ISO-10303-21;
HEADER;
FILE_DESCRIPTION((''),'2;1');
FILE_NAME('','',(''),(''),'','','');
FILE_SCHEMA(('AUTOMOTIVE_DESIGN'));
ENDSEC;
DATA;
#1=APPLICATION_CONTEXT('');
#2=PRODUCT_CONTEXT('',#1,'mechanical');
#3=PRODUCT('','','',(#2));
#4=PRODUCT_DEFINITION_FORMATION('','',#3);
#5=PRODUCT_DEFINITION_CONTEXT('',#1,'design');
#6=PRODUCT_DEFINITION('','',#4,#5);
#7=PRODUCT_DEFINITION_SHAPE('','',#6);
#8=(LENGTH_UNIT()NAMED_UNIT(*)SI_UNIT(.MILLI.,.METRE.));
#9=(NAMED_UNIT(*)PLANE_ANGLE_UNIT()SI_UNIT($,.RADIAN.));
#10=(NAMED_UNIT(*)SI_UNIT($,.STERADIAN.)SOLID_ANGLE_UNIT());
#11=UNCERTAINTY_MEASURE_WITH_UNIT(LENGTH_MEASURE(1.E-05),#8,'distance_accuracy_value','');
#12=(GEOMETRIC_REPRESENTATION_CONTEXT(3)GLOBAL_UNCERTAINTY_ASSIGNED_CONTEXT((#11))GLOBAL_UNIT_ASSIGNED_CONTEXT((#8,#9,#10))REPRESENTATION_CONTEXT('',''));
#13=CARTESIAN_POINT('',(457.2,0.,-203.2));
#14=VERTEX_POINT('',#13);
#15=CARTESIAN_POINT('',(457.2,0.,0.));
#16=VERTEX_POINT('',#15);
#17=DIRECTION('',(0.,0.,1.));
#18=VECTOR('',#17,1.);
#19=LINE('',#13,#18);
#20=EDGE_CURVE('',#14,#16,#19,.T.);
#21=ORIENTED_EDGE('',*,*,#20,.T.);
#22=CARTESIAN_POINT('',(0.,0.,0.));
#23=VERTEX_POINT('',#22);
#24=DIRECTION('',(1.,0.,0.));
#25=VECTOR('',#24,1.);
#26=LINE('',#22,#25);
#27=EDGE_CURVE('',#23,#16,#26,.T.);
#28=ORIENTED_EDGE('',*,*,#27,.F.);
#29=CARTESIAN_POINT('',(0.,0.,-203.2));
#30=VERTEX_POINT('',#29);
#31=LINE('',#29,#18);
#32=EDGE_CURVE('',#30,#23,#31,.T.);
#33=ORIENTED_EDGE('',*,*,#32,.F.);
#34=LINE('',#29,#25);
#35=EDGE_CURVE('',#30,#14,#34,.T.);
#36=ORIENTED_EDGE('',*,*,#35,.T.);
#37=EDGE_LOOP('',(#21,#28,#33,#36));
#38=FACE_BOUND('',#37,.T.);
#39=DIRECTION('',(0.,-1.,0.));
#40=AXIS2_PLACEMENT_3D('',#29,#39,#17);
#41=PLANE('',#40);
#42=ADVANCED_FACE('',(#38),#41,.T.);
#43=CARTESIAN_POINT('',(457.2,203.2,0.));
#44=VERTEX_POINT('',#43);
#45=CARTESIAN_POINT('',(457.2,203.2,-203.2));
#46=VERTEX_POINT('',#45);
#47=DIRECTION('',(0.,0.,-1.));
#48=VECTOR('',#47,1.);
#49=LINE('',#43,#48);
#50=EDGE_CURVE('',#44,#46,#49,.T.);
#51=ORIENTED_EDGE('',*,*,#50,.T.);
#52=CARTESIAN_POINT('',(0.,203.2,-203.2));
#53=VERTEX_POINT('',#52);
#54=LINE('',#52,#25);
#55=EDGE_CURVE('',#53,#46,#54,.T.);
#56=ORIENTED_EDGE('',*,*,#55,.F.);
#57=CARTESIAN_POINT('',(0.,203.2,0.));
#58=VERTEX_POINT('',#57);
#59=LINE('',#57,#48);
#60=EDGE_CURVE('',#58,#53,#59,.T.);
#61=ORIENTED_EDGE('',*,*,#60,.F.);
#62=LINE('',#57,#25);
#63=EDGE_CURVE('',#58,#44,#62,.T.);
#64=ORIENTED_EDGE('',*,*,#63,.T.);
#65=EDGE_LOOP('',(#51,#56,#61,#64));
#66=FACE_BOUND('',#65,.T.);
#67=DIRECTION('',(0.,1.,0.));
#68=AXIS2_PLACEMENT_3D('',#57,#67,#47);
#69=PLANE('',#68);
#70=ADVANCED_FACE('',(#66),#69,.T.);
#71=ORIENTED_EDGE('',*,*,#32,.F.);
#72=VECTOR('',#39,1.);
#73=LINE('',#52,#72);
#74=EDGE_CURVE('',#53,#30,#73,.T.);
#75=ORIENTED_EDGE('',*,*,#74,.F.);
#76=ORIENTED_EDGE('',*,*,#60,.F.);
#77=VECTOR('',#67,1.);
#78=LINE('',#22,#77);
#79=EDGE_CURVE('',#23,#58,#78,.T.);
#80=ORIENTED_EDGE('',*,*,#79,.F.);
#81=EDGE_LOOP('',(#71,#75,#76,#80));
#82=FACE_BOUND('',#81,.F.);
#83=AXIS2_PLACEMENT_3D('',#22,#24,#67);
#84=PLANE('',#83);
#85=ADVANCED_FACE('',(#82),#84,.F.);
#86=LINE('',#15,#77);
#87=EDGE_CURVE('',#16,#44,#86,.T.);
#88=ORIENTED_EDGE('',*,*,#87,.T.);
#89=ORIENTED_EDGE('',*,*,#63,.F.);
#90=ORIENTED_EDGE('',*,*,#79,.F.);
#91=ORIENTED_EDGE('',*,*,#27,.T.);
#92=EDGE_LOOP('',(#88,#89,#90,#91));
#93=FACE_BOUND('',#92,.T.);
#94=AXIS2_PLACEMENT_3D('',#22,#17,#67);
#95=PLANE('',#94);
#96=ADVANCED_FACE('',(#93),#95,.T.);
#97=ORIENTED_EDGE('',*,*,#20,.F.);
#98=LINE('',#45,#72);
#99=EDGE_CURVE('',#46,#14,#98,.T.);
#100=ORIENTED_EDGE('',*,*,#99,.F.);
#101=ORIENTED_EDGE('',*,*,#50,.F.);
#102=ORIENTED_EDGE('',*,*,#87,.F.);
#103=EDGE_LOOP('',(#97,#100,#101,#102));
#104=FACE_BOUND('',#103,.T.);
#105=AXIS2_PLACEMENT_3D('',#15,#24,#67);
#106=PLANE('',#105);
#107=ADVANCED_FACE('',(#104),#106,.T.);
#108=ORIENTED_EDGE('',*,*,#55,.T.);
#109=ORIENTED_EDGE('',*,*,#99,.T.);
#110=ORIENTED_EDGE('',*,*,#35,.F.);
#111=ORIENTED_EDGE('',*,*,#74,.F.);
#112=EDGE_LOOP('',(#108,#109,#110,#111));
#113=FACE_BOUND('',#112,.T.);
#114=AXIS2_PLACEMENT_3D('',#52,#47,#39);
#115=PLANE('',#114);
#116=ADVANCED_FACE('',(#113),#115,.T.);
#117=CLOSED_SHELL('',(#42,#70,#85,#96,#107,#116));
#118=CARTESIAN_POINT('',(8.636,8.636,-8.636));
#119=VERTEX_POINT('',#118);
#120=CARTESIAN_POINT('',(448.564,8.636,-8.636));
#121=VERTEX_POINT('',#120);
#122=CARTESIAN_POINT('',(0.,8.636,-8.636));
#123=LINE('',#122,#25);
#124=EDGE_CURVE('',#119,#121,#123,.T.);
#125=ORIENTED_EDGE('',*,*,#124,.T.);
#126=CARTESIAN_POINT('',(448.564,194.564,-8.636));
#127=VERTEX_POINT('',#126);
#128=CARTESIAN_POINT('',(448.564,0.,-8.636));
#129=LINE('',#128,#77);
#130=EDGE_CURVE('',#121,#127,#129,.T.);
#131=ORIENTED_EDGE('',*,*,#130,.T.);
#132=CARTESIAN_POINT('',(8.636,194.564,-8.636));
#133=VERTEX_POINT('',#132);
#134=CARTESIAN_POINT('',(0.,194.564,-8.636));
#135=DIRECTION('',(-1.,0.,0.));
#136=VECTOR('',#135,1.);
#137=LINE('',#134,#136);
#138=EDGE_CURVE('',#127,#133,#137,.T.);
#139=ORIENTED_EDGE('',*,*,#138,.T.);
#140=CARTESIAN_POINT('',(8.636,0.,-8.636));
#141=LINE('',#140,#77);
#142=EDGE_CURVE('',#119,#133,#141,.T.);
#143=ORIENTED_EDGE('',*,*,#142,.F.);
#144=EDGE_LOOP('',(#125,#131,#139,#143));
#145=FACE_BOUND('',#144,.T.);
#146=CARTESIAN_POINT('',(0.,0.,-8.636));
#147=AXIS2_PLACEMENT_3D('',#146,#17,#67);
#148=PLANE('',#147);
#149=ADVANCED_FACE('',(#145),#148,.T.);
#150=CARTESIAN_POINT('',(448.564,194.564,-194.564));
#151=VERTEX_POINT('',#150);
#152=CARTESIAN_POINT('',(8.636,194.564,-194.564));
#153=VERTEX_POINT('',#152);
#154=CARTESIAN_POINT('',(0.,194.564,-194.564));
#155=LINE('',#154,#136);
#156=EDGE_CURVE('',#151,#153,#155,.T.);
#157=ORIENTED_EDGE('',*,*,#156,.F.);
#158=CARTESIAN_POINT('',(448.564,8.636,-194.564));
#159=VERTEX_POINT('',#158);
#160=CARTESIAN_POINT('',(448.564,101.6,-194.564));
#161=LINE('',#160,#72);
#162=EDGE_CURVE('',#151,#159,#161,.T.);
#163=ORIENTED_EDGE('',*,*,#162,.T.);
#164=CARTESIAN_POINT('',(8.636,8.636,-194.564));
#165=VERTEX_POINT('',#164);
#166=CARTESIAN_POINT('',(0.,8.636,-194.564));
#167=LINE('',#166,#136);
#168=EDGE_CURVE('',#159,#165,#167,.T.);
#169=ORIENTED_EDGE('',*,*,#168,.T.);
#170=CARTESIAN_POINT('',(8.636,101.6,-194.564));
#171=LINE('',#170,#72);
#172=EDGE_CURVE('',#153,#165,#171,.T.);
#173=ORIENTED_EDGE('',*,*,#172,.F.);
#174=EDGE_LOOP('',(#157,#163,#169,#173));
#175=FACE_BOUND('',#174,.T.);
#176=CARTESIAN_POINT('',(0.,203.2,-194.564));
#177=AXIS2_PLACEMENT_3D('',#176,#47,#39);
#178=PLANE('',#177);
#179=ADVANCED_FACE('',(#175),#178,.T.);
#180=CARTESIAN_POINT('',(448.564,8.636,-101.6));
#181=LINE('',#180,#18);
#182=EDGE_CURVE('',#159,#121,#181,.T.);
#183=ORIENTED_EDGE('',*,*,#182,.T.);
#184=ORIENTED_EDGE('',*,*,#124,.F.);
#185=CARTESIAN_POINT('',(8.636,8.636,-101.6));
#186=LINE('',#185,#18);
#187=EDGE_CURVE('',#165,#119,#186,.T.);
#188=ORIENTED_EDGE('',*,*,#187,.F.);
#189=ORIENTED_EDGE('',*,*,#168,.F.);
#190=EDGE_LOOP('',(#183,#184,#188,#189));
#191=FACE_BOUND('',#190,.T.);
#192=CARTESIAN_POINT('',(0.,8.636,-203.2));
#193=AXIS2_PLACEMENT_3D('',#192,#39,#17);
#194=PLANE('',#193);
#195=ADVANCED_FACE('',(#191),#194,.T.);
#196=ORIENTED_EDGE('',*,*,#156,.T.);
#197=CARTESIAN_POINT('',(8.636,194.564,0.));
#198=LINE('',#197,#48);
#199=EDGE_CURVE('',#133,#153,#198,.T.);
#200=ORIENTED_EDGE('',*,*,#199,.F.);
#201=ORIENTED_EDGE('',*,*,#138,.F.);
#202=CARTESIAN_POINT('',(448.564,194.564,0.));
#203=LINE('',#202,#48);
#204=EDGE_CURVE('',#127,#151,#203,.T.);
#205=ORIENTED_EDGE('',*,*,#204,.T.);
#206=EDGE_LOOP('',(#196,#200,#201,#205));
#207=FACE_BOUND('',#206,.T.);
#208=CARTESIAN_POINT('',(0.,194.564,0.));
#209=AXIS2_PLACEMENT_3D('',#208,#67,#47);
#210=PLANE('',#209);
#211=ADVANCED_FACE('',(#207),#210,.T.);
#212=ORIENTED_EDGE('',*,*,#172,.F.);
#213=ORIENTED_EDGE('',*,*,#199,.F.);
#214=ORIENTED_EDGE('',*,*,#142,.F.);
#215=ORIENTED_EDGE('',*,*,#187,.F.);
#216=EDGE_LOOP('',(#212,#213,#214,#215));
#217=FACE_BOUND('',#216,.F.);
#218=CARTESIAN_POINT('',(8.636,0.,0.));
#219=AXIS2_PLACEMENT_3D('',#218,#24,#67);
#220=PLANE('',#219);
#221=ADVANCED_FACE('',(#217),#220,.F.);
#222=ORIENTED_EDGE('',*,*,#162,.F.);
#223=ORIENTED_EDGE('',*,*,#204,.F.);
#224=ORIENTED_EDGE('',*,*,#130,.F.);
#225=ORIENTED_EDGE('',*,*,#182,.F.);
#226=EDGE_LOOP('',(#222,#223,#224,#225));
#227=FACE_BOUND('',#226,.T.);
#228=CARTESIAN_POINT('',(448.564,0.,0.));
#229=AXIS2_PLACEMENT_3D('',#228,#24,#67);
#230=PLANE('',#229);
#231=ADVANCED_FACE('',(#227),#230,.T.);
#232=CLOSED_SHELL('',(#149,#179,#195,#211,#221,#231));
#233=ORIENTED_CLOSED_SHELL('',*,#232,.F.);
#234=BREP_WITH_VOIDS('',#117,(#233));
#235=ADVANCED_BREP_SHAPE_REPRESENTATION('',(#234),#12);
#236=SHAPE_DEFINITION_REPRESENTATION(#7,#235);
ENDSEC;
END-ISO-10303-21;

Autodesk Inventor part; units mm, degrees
ref_plane "YZ Plane" through (0, 0, 0) normal (1, 0, 0) x (0, 1, 0)
ref_plane "XZ Plane" through (0, 0, 0) normal (0, 1, 0) x (-1, 0, 0)
ref_plane "XY Plane" through (0, 0, 0) normal (0, 0, 1) x (1, 0, 0)
sketch "Sketch1" plane through (0, 0, 0) normal (1, 0, 0) x (0, 1, 0)
  line L0 (0, 0) -> (203.2, 0)
  line L1 (203.2, 0) -> (203.2, -203.2)
  line L2 (203.2, -203.2) -> (0, -203.2)
  line L3 (0, -203.2) -> (0, 0)
  dimension "d0" = 203.2
  dimension "d1" = 203.2
extrude "Extrusion1" add sketch "Sketch1" along normal blind 457.2
shell "Shell1" thickness 8.636 removed faces 0
properties part number "CinderBlock" material "Concrete"
